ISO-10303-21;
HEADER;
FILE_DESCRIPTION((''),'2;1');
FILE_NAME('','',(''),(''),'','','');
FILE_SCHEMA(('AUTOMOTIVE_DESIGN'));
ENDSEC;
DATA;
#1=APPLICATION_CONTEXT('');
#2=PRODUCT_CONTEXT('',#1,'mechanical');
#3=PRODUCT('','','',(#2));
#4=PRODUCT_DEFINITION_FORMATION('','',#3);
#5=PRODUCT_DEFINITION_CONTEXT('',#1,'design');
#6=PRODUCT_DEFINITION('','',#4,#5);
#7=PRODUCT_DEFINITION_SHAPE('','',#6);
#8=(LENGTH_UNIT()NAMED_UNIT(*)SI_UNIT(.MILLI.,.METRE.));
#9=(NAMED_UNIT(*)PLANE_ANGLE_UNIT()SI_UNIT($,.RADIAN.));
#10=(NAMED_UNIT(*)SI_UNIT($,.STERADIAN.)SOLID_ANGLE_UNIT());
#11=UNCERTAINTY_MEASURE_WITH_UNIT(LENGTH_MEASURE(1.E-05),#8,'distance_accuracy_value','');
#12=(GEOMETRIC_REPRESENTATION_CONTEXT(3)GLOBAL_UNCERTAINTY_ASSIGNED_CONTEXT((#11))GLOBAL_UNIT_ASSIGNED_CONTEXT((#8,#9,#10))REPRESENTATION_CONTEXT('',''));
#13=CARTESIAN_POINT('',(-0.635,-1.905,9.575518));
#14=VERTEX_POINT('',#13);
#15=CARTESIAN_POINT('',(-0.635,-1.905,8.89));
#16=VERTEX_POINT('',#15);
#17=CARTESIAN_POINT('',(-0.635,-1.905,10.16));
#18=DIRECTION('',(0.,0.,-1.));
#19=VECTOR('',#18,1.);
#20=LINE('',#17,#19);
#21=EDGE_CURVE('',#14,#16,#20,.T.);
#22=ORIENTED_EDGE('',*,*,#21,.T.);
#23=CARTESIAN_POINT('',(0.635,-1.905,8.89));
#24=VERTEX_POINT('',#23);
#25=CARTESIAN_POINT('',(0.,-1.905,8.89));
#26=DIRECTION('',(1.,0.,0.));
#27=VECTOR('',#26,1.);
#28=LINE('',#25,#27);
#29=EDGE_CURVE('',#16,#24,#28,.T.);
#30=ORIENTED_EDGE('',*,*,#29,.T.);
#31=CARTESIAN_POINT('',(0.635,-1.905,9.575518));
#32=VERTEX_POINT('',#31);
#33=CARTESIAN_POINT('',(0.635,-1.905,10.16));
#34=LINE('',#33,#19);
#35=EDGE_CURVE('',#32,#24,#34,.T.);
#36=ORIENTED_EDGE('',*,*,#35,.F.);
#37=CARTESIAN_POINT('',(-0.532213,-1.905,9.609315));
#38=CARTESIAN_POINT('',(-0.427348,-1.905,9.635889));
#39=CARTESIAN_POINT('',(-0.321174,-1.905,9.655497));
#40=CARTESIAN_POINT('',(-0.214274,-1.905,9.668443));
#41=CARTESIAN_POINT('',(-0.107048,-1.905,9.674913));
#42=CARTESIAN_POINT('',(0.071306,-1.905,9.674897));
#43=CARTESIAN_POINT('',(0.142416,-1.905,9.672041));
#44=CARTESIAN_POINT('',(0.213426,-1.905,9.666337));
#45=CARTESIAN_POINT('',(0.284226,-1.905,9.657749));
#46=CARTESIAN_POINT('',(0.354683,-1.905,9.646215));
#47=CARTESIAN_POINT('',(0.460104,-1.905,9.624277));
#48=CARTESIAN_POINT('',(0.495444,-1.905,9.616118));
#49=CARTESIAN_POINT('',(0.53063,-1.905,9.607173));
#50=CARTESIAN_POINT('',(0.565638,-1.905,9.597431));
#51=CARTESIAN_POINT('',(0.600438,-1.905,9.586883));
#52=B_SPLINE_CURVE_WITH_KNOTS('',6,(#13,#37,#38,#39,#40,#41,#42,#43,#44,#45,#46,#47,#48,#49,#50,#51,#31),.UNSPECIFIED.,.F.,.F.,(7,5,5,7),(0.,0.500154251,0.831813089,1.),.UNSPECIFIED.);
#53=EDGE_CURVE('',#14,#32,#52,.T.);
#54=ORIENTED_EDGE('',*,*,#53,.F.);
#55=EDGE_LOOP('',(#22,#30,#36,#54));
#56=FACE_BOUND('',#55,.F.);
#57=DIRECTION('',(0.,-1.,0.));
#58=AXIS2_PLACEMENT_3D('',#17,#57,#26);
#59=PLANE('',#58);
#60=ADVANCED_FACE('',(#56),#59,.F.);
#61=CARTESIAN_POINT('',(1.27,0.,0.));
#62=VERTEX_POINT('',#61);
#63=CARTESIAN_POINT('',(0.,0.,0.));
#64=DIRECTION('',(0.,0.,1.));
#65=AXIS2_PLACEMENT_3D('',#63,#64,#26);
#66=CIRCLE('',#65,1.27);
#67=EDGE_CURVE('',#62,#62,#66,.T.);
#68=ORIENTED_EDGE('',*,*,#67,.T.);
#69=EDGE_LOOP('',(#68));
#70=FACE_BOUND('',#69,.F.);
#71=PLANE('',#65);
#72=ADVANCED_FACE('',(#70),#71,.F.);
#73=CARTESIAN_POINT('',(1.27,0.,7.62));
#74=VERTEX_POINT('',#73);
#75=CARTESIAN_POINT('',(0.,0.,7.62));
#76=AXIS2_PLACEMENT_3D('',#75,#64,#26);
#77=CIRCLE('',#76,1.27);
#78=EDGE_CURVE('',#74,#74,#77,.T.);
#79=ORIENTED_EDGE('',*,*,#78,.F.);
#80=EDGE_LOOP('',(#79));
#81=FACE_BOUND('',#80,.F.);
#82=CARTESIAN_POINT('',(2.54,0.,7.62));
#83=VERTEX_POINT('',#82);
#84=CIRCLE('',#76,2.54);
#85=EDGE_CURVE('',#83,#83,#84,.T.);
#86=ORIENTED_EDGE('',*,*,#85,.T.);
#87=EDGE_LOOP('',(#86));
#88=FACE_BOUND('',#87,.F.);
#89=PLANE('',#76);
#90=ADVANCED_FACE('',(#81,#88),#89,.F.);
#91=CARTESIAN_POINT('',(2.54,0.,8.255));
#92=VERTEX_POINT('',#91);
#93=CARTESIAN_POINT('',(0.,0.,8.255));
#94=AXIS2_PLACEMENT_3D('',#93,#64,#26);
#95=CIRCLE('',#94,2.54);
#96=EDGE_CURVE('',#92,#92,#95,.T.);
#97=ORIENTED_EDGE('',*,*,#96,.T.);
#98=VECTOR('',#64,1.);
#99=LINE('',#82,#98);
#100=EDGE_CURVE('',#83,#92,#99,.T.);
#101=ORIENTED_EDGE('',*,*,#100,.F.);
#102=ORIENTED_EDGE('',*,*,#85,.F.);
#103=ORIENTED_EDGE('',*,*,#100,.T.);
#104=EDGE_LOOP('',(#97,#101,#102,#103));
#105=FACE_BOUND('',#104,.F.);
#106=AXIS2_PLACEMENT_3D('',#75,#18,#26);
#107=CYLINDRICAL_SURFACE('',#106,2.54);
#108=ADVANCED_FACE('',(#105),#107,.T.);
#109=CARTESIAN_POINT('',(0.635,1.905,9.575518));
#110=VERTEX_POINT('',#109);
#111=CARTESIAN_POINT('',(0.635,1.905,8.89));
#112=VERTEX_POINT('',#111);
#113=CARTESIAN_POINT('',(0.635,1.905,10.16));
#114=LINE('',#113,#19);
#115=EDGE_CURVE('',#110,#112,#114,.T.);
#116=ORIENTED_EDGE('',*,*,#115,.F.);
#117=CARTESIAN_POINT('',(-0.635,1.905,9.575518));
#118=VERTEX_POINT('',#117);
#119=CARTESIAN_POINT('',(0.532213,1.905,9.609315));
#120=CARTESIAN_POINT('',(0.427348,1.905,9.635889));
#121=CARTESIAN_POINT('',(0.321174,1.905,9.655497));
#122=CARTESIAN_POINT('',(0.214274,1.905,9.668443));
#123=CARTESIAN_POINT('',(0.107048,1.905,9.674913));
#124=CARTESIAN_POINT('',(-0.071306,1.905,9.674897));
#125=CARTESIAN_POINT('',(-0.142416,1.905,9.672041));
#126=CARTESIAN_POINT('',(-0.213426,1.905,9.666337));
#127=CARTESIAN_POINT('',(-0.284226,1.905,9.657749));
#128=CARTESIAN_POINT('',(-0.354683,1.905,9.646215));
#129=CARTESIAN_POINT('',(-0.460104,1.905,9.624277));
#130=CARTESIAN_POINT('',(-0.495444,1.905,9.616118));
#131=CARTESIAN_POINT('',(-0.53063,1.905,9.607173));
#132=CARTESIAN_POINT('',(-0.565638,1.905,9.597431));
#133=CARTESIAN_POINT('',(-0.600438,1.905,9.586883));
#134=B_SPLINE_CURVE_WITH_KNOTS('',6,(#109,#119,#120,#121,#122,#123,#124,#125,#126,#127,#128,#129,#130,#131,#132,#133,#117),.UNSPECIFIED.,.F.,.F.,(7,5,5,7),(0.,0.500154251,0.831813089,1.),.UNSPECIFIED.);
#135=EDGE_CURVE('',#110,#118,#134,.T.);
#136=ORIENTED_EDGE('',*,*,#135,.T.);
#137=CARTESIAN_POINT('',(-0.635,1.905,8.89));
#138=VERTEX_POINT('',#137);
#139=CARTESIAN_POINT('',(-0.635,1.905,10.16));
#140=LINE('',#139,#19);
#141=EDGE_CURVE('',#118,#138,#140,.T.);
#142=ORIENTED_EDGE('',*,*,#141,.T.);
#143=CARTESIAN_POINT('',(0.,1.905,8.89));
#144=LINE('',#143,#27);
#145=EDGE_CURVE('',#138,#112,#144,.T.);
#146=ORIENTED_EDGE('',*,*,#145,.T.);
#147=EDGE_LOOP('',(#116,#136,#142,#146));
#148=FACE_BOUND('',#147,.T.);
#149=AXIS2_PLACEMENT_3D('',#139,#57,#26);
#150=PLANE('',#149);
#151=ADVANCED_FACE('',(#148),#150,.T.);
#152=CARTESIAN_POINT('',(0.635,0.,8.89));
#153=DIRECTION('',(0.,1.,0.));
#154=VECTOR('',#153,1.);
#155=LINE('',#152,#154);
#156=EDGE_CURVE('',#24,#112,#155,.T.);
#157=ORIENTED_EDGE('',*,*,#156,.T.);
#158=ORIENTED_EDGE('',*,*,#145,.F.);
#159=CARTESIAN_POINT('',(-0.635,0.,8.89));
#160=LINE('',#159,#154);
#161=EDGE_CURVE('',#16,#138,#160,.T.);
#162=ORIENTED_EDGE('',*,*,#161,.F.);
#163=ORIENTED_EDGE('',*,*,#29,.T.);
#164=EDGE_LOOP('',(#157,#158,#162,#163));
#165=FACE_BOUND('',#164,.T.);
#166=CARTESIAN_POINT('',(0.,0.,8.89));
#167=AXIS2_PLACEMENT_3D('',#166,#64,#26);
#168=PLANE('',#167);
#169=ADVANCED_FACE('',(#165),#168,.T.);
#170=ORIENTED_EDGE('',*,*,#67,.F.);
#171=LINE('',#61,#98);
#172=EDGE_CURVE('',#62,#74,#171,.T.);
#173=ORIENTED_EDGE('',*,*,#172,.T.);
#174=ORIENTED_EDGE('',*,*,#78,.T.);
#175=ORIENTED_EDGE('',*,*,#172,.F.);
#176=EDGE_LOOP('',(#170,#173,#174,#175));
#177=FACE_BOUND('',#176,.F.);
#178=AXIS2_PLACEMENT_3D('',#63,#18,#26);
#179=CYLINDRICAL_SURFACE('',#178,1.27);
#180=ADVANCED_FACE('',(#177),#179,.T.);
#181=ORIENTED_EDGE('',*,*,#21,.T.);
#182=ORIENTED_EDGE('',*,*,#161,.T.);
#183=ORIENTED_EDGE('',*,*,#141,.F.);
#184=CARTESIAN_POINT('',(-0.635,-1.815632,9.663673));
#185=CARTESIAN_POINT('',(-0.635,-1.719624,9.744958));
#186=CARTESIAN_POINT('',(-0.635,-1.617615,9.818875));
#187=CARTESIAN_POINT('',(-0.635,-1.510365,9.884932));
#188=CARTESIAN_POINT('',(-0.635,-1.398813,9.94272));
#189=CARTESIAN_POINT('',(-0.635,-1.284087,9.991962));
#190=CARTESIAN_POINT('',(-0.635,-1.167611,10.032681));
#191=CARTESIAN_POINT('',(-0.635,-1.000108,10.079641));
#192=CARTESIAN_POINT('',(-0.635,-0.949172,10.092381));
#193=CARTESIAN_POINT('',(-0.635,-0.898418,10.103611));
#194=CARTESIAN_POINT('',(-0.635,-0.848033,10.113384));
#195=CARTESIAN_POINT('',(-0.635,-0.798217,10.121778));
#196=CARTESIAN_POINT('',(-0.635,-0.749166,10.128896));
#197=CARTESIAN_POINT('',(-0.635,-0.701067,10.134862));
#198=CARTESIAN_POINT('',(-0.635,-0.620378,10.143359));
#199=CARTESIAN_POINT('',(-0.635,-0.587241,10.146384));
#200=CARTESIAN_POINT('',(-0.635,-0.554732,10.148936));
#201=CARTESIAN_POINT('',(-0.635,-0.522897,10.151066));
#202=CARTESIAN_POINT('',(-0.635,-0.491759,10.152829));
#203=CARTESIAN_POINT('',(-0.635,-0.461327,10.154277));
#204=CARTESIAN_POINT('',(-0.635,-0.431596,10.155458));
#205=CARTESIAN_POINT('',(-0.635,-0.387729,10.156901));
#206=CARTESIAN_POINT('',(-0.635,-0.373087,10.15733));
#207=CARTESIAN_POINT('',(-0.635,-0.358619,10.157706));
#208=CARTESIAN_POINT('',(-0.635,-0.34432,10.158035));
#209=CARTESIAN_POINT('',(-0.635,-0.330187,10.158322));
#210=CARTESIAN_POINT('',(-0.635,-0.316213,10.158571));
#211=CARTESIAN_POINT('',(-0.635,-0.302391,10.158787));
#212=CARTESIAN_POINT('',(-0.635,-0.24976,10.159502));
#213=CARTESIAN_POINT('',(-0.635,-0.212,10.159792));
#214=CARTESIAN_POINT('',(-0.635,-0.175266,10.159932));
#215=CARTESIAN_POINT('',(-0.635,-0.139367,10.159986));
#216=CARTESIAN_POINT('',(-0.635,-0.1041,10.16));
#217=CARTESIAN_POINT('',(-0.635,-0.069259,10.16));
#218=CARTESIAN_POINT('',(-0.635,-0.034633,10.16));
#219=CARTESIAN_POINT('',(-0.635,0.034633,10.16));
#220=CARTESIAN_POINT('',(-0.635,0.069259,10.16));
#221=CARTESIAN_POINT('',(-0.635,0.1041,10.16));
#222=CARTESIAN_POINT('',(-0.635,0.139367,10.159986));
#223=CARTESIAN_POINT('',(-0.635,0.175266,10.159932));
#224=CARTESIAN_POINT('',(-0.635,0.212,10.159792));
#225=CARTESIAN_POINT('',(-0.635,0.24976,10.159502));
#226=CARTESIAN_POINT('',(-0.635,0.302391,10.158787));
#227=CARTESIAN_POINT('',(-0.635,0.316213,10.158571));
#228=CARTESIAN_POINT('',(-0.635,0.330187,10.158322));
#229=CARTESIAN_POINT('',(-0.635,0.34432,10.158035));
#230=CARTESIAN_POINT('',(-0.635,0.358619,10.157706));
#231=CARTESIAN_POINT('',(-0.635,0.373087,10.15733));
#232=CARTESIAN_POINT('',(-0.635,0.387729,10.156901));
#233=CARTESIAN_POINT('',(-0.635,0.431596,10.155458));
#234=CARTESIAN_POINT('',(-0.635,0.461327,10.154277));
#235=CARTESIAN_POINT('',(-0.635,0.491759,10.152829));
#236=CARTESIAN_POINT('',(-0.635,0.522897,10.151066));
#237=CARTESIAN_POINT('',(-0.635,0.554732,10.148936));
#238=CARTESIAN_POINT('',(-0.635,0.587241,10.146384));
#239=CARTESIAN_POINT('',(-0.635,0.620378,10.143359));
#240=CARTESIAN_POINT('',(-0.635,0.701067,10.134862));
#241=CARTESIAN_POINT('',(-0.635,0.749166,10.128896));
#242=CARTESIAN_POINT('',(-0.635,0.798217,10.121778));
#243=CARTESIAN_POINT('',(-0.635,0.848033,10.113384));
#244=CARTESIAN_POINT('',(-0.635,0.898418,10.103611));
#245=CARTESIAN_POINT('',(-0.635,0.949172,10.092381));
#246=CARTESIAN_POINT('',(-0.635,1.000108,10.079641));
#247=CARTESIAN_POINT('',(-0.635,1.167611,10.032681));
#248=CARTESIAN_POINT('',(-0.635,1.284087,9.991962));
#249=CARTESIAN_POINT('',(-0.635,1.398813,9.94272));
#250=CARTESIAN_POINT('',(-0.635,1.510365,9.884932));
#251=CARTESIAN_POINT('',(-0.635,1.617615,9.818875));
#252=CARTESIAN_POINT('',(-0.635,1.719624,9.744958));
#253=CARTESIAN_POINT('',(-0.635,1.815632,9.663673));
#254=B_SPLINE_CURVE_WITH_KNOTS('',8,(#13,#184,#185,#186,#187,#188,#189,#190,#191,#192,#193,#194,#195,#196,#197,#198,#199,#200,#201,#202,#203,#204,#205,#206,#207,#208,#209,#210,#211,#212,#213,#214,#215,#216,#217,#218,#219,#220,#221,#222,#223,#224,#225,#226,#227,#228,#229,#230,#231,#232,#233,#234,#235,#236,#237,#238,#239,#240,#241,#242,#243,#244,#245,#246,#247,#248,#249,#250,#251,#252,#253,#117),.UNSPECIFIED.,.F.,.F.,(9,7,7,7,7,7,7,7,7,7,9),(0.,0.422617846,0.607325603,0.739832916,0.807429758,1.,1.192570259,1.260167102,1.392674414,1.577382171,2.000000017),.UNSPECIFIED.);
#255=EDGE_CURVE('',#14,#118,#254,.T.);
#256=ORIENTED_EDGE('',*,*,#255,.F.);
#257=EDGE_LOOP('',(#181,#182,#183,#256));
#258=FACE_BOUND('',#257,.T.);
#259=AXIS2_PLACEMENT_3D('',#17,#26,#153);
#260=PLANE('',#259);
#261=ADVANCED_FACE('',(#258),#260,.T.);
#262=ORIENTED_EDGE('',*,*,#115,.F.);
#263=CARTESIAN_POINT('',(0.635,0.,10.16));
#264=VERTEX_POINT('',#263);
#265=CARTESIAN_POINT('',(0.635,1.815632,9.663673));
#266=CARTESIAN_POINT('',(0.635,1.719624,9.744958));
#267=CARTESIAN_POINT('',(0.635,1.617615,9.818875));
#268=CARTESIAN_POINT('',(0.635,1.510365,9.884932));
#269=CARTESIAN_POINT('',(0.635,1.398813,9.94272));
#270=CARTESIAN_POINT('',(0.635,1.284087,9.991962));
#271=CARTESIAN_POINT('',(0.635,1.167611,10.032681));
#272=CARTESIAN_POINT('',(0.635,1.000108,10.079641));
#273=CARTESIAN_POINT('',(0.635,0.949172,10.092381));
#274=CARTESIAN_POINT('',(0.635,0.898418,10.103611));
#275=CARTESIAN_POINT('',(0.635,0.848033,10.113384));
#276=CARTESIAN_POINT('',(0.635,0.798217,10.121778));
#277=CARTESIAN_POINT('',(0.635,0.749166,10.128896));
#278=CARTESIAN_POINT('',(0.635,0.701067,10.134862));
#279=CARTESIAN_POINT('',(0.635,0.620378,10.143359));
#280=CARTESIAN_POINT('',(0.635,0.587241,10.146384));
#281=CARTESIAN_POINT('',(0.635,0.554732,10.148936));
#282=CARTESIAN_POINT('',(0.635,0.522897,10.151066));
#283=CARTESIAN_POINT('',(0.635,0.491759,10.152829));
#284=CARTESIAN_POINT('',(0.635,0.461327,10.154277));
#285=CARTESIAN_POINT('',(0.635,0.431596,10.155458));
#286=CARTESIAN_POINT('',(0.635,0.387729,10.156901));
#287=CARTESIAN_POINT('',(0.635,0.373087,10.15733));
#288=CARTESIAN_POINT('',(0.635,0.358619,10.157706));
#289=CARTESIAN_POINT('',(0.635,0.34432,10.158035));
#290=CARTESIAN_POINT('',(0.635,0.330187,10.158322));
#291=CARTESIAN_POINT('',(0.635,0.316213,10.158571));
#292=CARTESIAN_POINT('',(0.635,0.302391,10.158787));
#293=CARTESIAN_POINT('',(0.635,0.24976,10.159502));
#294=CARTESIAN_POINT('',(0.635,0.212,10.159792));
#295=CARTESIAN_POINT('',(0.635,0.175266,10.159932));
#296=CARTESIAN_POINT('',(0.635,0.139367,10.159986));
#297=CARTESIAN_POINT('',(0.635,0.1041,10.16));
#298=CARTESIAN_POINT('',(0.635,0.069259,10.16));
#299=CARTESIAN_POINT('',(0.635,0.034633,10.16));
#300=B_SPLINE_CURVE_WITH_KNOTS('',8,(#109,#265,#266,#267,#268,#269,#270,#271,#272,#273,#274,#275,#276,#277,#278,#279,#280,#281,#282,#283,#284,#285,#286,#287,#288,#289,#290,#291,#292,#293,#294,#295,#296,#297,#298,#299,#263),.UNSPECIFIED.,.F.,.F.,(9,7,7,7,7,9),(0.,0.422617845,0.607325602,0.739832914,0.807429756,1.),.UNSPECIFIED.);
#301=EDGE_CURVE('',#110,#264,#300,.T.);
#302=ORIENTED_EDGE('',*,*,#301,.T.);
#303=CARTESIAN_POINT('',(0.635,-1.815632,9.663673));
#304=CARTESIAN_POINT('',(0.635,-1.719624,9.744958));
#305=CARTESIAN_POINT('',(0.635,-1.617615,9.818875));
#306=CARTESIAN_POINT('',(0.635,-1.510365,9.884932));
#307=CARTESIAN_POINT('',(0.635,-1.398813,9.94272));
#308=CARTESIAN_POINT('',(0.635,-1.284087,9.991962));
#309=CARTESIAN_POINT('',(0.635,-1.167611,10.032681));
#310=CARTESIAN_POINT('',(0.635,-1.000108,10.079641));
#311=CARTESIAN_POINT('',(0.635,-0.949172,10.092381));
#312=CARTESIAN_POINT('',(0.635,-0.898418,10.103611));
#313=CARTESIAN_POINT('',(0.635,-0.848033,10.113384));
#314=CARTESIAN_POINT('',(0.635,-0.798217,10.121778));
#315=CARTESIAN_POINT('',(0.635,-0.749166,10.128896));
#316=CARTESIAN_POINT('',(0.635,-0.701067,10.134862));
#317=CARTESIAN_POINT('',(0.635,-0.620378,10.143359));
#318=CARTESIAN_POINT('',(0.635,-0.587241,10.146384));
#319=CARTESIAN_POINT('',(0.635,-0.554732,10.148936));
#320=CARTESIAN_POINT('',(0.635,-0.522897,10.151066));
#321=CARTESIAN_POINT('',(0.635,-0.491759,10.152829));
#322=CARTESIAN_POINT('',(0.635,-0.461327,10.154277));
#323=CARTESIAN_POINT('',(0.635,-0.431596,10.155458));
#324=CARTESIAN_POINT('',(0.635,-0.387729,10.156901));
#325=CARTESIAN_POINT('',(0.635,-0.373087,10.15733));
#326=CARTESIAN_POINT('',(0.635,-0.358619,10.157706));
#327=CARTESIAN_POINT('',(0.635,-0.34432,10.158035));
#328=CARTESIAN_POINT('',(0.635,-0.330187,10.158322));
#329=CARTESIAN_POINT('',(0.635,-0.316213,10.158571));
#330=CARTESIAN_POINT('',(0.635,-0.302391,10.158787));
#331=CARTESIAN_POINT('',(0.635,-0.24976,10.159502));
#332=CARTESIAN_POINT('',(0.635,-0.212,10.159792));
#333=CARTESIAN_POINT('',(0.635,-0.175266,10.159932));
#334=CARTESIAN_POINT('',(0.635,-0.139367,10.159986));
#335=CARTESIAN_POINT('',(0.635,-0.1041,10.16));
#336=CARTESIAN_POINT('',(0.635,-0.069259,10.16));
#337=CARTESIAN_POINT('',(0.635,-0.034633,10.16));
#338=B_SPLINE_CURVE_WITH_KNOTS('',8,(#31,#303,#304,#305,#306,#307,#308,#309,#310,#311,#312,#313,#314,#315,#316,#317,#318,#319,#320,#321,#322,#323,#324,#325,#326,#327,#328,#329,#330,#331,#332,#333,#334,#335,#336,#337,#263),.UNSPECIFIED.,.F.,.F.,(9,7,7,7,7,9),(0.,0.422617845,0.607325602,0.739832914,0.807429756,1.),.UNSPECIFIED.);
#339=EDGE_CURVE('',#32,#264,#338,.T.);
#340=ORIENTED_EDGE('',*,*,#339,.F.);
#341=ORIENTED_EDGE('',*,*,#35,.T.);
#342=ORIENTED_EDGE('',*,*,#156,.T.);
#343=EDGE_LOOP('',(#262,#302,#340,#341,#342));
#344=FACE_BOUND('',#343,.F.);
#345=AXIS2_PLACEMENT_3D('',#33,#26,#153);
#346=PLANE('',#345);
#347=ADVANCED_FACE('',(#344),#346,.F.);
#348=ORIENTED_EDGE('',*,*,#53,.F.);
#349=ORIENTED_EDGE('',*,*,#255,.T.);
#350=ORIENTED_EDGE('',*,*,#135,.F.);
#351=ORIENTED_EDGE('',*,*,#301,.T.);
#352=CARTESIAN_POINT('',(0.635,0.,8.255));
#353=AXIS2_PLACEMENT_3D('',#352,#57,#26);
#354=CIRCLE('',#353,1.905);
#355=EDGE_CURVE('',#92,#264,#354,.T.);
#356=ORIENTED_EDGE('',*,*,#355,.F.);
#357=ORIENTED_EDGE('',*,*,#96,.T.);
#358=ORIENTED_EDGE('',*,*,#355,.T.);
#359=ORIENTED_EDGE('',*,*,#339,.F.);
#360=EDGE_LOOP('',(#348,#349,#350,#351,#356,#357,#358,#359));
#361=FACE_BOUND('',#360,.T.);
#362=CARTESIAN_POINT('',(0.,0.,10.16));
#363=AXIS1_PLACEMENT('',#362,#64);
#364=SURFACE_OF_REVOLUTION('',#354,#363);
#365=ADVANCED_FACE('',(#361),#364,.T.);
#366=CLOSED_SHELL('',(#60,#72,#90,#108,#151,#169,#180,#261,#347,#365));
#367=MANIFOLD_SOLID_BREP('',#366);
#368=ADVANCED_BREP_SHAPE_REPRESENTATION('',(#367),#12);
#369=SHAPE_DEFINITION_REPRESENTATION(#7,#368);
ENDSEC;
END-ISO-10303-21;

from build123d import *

# Parameters (mm, degrees)
F0_R     = 1.27
F1_DEPTH = 7.62
F2_R     = 2.54
F3_DEPTH = 2.54
F4_W     = 1.27
F4_H     = 3.81
F5_DEPTH = 1.27


# Not quite as in the source:
# - a fillet or chamfer that OpenCascade refuses, or shapes differently, is made with other operations: its cross-section is extruded or revolved along the edge and cut away or added


with BuildPart() as f1:
    # F0 (on Top) → F1 (new body)
    with BuildSketch(Plane.XY):
        Circle(F0_R)
    extrude(amount=F1_DEPTH)

    # F2 (on face) → F3 (join)
    with BuildSketch(Plane.XY.offset(7.62)):
        Circle(F2_R)
    extrude(amount=F3_DEPTH)

    # F4 (on face) → F5 (cut)
    with BuildSketch(Plane.XY.offset(10.16)):
        Rectangle(F4_W, F4_H)
    extrude(amount=-F5_DEPTH, mode=Mode.SUBTRACT)

    # F6: fillet of radius 1.905 on 1 edges, made by hand

    # F6_s1 → F6_t2 (revolve, cut)
    with BuildSketch(Plane.XZ):
        with BuildLine():
            ThreePointArc((2.54, 8.255), (1.9820384182, 9.6020384182), (0.635, 10.16))
            Line((0.635, 10.16), (2.54, 10.16))
            Line((2.54, 10.16), (2.54, 8.255))
        make_face()
    revolve(axis=Axis((0, 0, 10.16), (0, 0, 1)), mode=Mode.SUBTRACT)


solid = f1.part
